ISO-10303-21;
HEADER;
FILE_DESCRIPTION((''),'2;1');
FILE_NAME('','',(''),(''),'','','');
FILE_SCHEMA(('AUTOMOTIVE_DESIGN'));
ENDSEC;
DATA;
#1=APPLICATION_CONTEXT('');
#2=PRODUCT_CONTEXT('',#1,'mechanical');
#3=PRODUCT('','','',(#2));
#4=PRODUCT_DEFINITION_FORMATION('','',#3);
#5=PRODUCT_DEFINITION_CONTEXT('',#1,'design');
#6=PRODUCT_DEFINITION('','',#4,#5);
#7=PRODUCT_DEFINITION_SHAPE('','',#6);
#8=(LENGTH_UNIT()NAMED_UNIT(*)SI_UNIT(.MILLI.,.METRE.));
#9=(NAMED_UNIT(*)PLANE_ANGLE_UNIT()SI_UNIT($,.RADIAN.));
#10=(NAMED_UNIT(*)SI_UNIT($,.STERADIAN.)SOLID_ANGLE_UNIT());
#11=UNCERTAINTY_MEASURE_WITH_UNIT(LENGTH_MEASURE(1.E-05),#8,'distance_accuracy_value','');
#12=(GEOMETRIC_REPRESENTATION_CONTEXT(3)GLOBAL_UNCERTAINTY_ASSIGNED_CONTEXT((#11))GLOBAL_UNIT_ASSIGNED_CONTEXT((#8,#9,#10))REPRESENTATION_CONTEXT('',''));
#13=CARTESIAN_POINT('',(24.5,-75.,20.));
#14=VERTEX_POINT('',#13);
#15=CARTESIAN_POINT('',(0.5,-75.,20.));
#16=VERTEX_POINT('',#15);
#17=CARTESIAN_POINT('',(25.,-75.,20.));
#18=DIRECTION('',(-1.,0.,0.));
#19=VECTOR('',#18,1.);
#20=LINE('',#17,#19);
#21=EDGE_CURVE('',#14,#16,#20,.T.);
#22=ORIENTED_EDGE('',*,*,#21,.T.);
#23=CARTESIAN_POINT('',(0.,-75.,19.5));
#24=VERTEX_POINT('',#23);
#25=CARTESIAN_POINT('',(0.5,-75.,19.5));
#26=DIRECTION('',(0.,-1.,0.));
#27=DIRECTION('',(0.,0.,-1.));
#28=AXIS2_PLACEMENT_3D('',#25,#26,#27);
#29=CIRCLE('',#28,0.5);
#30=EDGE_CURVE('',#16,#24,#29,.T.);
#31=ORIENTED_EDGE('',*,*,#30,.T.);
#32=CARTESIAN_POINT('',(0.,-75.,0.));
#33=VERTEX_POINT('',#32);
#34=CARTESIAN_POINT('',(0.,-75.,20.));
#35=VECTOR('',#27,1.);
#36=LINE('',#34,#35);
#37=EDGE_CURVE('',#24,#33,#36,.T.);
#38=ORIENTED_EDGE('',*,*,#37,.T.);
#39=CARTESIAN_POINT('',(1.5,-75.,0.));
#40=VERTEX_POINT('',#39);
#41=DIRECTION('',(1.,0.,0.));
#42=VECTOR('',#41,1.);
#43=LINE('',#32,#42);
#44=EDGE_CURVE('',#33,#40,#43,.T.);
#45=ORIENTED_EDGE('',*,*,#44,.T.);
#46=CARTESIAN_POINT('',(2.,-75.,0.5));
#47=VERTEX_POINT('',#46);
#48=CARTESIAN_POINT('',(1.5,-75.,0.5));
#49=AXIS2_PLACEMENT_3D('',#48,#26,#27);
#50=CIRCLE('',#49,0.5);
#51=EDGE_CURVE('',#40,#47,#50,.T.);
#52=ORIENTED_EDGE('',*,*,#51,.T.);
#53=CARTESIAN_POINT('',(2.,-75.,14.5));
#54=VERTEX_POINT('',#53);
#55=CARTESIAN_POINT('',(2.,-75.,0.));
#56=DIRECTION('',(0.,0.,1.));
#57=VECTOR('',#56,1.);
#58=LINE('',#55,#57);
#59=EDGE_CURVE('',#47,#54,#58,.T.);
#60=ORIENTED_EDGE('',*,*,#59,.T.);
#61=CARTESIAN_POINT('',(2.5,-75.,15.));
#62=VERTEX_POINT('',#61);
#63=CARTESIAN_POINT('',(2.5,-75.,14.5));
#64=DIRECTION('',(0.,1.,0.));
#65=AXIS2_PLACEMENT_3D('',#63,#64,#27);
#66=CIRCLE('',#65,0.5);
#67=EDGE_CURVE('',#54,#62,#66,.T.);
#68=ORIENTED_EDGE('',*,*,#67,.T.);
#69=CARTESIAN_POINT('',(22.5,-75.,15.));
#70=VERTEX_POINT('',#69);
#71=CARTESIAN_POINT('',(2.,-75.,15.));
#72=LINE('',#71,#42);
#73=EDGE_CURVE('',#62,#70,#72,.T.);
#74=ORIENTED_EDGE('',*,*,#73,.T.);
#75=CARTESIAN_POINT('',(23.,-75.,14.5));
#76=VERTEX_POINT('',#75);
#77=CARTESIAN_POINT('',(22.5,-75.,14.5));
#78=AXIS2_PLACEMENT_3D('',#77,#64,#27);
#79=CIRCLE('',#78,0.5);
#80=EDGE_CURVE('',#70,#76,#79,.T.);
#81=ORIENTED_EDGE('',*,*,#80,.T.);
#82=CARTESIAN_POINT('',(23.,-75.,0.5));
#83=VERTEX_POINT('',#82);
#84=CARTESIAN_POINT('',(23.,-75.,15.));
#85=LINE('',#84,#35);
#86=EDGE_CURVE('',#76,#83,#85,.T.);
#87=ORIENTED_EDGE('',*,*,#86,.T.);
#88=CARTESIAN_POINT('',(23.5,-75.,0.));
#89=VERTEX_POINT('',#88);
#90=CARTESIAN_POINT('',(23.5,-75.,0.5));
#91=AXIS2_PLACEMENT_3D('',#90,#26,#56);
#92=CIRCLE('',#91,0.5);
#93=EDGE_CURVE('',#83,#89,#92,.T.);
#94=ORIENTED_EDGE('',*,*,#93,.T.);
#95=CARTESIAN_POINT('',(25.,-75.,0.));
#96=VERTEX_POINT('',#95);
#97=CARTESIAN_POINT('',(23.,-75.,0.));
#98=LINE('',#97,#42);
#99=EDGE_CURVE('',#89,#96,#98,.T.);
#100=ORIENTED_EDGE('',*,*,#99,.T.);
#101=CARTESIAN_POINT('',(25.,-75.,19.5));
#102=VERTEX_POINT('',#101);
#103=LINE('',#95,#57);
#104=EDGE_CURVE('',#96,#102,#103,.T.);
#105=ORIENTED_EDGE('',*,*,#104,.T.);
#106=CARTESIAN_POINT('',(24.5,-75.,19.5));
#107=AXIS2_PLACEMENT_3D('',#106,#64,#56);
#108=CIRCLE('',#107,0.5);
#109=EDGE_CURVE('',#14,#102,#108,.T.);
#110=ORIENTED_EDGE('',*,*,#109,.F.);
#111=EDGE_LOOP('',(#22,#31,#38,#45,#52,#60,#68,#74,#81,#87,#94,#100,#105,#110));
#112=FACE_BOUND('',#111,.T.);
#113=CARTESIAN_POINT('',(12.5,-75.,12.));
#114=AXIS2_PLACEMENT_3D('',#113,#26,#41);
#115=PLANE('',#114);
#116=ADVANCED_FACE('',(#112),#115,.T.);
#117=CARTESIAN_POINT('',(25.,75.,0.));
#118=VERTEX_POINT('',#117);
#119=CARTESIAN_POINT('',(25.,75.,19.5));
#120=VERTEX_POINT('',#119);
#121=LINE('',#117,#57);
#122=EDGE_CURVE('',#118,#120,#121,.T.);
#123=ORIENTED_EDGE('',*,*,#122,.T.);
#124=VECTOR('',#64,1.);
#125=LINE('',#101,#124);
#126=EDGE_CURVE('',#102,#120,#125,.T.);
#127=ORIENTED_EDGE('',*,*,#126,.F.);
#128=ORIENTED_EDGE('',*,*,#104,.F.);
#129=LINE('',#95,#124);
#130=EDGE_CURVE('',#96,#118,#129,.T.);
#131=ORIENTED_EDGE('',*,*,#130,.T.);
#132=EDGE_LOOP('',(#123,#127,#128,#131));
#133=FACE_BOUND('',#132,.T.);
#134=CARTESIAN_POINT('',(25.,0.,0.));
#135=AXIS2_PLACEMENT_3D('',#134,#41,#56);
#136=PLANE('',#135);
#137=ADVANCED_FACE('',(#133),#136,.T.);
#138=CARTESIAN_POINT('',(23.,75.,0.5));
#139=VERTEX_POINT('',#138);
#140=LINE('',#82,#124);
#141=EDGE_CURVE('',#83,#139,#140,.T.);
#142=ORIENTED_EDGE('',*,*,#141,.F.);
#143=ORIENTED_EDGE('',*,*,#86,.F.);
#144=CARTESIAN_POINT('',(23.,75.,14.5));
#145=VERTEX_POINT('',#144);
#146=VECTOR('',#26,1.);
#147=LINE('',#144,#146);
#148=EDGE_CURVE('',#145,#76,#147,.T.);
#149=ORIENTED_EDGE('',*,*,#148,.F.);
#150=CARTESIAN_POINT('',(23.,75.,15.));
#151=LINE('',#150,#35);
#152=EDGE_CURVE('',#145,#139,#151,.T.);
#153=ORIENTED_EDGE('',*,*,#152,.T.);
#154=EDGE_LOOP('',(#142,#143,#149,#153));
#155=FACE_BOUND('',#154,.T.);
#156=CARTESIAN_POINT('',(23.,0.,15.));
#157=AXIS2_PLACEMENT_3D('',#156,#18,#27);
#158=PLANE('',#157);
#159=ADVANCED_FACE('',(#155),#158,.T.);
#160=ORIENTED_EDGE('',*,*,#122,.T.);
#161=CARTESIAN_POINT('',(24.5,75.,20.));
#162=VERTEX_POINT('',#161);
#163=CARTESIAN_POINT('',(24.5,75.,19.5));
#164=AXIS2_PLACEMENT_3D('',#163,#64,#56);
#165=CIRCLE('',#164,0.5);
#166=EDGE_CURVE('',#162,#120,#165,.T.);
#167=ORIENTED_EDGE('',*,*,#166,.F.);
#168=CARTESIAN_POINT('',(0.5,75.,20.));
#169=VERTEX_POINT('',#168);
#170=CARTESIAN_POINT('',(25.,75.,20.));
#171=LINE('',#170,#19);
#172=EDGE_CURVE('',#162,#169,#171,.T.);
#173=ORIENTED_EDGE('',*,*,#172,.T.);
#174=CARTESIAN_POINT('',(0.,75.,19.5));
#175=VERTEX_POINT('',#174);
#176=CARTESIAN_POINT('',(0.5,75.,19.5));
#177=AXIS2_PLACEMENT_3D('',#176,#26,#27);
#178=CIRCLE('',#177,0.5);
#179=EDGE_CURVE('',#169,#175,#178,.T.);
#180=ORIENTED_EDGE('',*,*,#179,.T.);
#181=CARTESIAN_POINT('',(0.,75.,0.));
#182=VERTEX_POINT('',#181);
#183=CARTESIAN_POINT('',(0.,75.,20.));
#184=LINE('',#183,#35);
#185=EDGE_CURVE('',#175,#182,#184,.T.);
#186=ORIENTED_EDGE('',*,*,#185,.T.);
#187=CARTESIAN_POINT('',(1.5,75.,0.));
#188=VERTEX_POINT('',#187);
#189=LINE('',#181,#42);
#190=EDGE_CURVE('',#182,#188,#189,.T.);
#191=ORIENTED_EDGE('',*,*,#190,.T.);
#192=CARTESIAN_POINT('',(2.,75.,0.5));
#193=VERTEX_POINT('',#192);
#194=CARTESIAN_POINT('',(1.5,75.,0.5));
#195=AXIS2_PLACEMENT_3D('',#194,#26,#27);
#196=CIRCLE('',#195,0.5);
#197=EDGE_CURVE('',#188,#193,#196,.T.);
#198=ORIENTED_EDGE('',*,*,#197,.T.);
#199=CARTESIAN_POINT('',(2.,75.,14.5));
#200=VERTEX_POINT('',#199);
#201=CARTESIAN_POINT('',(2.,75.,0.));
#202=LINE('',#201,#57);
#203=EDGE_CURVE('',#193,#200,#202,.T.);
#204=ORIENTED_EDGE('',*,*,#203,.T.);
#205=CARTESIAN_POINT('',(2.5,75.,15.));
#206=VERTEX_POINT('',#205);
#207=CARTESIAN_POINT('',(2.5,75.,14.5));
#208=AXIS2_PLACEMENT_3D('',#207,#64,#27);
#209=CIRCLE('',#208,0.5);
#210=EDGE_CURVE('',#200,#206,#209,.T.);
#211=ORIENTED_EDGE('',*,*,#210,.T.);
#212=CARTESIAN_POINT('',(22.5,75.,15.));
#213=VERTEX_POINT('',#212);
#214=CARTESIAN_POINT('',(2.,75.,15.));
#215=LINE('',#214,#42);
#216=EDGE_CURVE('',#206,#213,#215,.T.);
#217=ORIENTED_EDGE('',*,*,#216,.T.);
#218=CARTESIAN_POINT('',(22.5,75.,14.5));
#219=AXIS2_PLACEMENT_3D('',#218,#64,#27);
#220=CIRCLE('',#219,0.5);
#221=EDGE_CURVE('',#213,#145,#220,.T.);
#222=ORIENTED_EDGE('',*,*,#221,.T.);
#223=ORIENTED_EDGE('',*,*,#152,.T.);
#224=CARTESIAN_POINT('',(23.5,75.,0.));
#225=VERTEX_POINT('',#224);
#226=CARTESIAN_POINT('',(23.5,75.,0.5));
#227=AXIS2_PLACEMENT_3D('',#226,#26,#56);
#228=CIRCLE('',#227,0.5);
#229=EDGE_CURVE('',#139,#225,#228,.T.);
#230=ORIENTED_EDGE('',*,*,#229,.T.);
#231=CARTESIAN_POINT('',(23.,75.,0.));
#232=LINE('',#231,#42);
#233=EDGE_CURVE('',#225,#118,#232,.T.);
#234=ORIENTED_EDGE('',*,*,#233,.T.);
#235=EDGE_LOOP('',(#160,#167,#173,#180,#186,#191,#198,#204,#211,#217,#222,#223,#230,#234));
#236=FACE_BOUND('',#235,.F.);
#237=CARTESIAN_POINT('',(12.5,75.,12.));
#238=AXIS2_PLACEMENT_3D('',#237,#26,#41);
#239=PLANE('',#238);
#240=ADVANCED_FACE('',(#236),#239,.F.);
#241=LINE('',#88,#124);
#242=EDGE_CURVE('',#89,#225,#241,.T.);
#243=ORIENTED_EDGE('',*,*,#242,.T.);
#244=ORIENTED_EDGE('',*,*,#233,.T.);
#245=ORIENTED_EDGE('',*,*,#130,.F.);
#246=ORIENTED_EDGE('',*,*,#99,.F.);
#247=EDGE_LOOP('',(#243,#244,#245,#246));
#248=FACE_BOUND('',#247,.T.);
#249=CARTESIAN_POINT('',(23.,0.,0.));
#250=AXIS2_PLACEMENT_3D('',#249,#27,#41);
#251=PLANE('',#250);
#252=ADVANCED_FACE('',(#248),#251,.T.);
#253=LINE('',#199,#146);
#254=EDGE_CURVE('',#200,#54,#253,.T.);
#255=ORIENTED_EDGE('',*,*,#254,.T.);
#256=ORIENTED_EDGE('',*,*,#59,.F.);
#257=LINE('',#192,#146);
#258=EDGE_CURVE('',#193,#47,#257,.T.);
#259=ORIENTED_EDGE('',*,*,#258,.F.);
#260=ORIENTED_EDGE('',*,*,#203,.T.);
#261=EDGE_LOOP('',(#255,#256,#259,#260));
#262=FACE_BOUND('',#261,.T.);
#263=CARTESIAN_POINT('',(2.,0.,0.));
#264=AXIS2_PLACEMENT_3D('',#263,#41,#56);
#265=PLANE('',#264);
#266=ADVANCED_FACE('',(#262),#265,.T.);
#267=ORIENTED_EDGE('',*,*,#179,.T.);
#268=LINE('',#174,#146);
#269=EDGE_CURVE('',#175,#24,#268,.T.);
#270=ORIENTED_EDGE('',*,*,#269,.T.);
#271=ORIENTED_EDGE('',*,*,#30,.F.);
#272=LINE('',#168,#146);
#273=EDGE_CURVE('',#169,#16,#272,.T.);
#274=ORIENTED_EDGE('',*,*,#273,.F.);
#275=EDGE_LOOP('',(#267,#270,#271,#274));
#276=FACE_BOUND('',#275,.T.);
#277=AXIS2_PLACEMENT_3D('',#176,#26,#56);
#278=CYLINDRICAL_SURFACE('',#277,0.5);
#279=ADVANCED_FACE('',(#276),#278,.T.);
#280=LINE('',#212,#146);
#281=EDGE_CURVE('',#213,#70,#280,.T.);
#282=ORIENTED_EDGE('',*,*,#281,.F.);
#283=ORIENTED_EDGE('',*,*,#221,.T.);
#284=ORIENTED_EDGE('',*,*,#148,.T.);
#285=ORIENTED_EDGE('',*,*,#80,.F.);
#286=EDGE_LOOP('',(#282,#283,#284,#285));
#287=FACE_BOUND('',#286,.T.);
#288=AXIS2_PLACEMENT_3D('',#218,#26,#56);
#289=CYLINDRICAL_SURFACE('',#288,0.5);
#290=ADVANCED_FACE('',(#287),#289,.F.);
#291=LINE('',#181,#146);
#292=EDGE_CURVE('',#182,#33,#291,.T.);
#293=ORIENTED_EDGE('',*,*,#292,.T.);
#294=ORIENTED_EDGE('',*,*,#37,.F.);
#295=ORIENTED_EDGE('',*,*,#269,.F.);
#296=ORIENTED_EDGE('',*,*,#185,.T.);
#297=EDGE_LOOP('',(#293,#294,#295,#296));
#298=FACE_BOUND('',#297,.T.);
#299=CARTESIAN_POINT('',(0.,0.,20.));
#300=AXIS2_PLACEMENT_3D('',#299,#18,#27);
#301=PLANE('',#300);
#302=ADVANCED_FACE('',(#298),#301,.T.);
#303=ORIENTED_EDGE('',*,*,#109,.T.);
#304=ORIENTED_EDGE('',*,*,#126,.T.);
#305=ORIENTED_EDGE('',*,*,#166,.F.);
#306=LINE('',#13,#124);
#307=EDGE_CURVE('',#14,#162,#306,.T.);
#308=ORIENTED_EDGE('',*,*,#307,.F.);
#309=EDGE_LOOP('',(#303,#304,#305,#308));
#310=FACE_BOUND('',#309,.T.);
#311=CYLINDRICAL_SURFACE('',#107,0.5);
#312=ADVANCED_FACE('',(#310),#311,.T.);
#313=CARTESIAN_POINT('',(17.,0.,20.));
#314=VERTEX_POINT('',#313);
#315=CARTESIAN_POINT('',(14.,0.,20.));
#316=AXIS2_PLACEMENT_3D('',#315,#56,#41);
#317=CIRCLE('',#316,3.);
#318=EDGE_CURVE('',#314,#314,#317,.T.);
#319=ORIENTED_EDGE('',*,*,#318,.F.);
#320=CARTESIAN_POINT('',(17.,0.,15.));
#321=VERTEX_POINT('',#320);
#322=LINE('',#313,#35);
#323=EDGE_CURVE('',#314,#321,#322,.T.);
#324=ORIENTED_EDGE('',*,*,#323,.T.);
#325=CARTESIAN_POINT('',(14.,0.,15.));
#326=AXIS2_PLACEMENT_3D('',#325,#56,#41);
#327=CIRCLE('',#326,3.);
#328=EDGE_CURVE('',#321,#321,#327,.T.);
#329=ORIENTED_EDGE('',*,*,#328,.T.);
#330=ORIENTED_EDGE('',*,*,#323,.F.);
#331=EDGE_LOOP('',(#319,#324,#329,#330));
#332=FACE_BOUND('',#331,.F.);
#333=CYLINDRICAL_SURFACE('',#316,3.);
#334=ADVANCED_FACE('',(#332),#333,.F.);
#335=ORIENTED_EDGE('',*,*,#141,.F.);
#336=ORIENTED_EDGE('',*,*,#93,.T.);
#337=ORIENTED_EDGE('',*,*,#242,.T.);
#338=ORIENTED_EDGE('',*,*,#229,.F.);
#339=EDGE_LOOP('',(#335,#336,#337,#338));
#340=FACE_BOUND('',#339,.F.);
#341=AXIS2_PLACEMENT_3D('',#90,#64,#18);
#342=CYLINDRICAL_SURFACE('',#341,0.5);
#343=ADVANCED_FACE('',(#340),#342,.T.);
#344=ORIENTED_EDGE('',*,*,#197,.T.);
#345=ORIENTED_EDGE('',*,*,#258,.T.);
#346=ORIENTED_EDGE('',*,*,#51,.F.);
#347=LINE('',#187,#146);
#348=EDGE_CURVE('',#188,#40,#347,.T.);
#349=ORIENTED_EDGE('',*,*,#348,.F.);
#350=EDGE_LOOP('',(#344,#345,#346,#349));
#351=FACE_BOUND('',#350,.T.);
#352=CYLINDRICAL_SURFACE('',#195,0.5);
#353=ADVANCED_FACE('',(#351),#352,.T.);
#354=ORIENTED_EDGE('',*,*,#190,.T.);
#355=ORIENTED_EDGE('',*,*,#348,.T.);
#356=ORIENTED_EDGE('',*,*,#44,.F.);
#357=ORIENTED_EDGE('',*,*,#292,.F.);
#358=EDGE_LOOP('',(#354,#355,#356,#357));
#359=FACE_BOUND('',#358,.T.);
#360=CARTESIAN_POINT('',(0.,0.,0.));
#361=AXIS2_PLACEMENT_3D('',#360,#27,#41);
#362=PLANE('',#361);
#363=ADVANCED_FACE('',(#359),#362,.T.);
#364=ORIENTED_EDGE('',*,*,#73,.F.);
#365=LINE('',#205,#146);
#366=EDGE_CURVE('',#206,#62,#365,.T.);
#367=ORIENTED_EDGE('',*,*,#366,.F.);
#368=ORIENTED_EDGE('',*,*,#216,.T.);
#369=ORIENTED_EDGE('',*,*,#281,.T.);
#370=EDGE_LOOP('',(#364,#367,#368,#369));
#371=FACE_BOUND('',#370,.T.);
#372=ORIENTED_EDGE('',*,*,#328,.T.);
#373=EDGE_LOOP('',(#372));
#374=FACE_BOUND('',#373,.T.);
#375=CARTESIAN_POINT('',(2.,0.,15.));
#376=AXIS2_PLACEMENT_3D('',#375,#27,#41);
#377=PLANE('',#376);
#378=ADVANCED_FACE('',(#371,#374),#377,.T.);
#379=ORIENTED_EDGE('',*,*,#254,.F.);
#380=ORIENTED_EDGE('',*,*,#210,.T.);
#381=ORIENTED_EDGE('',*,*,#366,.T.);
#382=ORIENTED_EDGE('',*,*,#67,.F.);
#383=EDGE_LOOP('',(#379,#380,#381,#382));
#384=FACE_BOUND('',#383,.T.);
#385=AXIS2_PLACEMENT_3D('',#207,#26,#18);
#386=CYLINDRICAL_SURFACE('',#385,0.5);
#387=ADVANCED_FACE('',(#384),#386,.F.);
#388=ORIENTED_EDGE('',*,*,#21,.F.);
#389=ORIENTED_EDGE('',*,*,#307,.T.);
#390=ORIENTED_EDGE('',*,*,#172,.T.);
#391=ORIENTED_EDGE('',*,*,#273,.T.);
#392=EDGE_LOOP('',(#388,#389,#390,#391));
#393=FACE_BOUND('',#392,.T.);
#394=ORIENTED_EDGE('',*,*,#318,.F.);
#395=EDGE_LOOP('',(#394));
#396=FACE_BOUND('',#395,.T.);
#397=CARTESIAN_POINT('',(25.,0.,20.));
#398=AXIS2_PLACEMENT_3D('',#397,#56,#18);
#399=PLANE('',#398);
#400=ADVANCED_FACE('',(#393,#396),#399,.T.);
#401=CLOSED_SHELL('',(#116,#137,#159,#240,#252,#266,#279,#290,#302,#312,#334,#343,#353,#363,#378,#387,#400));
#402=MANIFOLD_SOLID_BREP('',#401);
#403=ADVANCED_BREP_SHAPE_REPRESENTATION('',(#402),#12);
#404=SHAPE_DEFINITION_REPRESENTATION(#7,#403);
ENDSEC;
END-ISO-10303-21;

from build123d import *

# Parameters (mm, degrees)
F1_DEPTH = 75
F2_R     = 3
F3_DEPTH = 5
F4_R     = 0.5


with BuildPart() as f1:
    # F0 (on Front) → F1 (new body, symmetric)
    with BuildSketch(Plane.XZ):
        Polygon((25, 20), (0, 20), (0, 0), (2, 0), (2, 15), (23, 15), (23, 0), (25, 0), align=None)
    extrude(amount=F1_DEPTH, both=True)

    # F2 (on face) → F3 (cut, through all)
    with BuildSketch(Plane.XY.offset(20)):
        with Locations((14, 0)):
            Circle(F2_R)
    extrude(amount=-F3_DEPTH, mode=Mode.SUBTRACT)

    # F4
    f4_edges = [f1.edges().sort_by_distance(p)[0] for p in [
        (0, 0, 20),
        (25, 0, 20),
        (2, 0, 0),
        (2, 0, 15),
        (23, 0, 15),
        (23, 0, 0),
    ]]
    fillet(f4_edges, radius=F4_R)


solid = f1.part
